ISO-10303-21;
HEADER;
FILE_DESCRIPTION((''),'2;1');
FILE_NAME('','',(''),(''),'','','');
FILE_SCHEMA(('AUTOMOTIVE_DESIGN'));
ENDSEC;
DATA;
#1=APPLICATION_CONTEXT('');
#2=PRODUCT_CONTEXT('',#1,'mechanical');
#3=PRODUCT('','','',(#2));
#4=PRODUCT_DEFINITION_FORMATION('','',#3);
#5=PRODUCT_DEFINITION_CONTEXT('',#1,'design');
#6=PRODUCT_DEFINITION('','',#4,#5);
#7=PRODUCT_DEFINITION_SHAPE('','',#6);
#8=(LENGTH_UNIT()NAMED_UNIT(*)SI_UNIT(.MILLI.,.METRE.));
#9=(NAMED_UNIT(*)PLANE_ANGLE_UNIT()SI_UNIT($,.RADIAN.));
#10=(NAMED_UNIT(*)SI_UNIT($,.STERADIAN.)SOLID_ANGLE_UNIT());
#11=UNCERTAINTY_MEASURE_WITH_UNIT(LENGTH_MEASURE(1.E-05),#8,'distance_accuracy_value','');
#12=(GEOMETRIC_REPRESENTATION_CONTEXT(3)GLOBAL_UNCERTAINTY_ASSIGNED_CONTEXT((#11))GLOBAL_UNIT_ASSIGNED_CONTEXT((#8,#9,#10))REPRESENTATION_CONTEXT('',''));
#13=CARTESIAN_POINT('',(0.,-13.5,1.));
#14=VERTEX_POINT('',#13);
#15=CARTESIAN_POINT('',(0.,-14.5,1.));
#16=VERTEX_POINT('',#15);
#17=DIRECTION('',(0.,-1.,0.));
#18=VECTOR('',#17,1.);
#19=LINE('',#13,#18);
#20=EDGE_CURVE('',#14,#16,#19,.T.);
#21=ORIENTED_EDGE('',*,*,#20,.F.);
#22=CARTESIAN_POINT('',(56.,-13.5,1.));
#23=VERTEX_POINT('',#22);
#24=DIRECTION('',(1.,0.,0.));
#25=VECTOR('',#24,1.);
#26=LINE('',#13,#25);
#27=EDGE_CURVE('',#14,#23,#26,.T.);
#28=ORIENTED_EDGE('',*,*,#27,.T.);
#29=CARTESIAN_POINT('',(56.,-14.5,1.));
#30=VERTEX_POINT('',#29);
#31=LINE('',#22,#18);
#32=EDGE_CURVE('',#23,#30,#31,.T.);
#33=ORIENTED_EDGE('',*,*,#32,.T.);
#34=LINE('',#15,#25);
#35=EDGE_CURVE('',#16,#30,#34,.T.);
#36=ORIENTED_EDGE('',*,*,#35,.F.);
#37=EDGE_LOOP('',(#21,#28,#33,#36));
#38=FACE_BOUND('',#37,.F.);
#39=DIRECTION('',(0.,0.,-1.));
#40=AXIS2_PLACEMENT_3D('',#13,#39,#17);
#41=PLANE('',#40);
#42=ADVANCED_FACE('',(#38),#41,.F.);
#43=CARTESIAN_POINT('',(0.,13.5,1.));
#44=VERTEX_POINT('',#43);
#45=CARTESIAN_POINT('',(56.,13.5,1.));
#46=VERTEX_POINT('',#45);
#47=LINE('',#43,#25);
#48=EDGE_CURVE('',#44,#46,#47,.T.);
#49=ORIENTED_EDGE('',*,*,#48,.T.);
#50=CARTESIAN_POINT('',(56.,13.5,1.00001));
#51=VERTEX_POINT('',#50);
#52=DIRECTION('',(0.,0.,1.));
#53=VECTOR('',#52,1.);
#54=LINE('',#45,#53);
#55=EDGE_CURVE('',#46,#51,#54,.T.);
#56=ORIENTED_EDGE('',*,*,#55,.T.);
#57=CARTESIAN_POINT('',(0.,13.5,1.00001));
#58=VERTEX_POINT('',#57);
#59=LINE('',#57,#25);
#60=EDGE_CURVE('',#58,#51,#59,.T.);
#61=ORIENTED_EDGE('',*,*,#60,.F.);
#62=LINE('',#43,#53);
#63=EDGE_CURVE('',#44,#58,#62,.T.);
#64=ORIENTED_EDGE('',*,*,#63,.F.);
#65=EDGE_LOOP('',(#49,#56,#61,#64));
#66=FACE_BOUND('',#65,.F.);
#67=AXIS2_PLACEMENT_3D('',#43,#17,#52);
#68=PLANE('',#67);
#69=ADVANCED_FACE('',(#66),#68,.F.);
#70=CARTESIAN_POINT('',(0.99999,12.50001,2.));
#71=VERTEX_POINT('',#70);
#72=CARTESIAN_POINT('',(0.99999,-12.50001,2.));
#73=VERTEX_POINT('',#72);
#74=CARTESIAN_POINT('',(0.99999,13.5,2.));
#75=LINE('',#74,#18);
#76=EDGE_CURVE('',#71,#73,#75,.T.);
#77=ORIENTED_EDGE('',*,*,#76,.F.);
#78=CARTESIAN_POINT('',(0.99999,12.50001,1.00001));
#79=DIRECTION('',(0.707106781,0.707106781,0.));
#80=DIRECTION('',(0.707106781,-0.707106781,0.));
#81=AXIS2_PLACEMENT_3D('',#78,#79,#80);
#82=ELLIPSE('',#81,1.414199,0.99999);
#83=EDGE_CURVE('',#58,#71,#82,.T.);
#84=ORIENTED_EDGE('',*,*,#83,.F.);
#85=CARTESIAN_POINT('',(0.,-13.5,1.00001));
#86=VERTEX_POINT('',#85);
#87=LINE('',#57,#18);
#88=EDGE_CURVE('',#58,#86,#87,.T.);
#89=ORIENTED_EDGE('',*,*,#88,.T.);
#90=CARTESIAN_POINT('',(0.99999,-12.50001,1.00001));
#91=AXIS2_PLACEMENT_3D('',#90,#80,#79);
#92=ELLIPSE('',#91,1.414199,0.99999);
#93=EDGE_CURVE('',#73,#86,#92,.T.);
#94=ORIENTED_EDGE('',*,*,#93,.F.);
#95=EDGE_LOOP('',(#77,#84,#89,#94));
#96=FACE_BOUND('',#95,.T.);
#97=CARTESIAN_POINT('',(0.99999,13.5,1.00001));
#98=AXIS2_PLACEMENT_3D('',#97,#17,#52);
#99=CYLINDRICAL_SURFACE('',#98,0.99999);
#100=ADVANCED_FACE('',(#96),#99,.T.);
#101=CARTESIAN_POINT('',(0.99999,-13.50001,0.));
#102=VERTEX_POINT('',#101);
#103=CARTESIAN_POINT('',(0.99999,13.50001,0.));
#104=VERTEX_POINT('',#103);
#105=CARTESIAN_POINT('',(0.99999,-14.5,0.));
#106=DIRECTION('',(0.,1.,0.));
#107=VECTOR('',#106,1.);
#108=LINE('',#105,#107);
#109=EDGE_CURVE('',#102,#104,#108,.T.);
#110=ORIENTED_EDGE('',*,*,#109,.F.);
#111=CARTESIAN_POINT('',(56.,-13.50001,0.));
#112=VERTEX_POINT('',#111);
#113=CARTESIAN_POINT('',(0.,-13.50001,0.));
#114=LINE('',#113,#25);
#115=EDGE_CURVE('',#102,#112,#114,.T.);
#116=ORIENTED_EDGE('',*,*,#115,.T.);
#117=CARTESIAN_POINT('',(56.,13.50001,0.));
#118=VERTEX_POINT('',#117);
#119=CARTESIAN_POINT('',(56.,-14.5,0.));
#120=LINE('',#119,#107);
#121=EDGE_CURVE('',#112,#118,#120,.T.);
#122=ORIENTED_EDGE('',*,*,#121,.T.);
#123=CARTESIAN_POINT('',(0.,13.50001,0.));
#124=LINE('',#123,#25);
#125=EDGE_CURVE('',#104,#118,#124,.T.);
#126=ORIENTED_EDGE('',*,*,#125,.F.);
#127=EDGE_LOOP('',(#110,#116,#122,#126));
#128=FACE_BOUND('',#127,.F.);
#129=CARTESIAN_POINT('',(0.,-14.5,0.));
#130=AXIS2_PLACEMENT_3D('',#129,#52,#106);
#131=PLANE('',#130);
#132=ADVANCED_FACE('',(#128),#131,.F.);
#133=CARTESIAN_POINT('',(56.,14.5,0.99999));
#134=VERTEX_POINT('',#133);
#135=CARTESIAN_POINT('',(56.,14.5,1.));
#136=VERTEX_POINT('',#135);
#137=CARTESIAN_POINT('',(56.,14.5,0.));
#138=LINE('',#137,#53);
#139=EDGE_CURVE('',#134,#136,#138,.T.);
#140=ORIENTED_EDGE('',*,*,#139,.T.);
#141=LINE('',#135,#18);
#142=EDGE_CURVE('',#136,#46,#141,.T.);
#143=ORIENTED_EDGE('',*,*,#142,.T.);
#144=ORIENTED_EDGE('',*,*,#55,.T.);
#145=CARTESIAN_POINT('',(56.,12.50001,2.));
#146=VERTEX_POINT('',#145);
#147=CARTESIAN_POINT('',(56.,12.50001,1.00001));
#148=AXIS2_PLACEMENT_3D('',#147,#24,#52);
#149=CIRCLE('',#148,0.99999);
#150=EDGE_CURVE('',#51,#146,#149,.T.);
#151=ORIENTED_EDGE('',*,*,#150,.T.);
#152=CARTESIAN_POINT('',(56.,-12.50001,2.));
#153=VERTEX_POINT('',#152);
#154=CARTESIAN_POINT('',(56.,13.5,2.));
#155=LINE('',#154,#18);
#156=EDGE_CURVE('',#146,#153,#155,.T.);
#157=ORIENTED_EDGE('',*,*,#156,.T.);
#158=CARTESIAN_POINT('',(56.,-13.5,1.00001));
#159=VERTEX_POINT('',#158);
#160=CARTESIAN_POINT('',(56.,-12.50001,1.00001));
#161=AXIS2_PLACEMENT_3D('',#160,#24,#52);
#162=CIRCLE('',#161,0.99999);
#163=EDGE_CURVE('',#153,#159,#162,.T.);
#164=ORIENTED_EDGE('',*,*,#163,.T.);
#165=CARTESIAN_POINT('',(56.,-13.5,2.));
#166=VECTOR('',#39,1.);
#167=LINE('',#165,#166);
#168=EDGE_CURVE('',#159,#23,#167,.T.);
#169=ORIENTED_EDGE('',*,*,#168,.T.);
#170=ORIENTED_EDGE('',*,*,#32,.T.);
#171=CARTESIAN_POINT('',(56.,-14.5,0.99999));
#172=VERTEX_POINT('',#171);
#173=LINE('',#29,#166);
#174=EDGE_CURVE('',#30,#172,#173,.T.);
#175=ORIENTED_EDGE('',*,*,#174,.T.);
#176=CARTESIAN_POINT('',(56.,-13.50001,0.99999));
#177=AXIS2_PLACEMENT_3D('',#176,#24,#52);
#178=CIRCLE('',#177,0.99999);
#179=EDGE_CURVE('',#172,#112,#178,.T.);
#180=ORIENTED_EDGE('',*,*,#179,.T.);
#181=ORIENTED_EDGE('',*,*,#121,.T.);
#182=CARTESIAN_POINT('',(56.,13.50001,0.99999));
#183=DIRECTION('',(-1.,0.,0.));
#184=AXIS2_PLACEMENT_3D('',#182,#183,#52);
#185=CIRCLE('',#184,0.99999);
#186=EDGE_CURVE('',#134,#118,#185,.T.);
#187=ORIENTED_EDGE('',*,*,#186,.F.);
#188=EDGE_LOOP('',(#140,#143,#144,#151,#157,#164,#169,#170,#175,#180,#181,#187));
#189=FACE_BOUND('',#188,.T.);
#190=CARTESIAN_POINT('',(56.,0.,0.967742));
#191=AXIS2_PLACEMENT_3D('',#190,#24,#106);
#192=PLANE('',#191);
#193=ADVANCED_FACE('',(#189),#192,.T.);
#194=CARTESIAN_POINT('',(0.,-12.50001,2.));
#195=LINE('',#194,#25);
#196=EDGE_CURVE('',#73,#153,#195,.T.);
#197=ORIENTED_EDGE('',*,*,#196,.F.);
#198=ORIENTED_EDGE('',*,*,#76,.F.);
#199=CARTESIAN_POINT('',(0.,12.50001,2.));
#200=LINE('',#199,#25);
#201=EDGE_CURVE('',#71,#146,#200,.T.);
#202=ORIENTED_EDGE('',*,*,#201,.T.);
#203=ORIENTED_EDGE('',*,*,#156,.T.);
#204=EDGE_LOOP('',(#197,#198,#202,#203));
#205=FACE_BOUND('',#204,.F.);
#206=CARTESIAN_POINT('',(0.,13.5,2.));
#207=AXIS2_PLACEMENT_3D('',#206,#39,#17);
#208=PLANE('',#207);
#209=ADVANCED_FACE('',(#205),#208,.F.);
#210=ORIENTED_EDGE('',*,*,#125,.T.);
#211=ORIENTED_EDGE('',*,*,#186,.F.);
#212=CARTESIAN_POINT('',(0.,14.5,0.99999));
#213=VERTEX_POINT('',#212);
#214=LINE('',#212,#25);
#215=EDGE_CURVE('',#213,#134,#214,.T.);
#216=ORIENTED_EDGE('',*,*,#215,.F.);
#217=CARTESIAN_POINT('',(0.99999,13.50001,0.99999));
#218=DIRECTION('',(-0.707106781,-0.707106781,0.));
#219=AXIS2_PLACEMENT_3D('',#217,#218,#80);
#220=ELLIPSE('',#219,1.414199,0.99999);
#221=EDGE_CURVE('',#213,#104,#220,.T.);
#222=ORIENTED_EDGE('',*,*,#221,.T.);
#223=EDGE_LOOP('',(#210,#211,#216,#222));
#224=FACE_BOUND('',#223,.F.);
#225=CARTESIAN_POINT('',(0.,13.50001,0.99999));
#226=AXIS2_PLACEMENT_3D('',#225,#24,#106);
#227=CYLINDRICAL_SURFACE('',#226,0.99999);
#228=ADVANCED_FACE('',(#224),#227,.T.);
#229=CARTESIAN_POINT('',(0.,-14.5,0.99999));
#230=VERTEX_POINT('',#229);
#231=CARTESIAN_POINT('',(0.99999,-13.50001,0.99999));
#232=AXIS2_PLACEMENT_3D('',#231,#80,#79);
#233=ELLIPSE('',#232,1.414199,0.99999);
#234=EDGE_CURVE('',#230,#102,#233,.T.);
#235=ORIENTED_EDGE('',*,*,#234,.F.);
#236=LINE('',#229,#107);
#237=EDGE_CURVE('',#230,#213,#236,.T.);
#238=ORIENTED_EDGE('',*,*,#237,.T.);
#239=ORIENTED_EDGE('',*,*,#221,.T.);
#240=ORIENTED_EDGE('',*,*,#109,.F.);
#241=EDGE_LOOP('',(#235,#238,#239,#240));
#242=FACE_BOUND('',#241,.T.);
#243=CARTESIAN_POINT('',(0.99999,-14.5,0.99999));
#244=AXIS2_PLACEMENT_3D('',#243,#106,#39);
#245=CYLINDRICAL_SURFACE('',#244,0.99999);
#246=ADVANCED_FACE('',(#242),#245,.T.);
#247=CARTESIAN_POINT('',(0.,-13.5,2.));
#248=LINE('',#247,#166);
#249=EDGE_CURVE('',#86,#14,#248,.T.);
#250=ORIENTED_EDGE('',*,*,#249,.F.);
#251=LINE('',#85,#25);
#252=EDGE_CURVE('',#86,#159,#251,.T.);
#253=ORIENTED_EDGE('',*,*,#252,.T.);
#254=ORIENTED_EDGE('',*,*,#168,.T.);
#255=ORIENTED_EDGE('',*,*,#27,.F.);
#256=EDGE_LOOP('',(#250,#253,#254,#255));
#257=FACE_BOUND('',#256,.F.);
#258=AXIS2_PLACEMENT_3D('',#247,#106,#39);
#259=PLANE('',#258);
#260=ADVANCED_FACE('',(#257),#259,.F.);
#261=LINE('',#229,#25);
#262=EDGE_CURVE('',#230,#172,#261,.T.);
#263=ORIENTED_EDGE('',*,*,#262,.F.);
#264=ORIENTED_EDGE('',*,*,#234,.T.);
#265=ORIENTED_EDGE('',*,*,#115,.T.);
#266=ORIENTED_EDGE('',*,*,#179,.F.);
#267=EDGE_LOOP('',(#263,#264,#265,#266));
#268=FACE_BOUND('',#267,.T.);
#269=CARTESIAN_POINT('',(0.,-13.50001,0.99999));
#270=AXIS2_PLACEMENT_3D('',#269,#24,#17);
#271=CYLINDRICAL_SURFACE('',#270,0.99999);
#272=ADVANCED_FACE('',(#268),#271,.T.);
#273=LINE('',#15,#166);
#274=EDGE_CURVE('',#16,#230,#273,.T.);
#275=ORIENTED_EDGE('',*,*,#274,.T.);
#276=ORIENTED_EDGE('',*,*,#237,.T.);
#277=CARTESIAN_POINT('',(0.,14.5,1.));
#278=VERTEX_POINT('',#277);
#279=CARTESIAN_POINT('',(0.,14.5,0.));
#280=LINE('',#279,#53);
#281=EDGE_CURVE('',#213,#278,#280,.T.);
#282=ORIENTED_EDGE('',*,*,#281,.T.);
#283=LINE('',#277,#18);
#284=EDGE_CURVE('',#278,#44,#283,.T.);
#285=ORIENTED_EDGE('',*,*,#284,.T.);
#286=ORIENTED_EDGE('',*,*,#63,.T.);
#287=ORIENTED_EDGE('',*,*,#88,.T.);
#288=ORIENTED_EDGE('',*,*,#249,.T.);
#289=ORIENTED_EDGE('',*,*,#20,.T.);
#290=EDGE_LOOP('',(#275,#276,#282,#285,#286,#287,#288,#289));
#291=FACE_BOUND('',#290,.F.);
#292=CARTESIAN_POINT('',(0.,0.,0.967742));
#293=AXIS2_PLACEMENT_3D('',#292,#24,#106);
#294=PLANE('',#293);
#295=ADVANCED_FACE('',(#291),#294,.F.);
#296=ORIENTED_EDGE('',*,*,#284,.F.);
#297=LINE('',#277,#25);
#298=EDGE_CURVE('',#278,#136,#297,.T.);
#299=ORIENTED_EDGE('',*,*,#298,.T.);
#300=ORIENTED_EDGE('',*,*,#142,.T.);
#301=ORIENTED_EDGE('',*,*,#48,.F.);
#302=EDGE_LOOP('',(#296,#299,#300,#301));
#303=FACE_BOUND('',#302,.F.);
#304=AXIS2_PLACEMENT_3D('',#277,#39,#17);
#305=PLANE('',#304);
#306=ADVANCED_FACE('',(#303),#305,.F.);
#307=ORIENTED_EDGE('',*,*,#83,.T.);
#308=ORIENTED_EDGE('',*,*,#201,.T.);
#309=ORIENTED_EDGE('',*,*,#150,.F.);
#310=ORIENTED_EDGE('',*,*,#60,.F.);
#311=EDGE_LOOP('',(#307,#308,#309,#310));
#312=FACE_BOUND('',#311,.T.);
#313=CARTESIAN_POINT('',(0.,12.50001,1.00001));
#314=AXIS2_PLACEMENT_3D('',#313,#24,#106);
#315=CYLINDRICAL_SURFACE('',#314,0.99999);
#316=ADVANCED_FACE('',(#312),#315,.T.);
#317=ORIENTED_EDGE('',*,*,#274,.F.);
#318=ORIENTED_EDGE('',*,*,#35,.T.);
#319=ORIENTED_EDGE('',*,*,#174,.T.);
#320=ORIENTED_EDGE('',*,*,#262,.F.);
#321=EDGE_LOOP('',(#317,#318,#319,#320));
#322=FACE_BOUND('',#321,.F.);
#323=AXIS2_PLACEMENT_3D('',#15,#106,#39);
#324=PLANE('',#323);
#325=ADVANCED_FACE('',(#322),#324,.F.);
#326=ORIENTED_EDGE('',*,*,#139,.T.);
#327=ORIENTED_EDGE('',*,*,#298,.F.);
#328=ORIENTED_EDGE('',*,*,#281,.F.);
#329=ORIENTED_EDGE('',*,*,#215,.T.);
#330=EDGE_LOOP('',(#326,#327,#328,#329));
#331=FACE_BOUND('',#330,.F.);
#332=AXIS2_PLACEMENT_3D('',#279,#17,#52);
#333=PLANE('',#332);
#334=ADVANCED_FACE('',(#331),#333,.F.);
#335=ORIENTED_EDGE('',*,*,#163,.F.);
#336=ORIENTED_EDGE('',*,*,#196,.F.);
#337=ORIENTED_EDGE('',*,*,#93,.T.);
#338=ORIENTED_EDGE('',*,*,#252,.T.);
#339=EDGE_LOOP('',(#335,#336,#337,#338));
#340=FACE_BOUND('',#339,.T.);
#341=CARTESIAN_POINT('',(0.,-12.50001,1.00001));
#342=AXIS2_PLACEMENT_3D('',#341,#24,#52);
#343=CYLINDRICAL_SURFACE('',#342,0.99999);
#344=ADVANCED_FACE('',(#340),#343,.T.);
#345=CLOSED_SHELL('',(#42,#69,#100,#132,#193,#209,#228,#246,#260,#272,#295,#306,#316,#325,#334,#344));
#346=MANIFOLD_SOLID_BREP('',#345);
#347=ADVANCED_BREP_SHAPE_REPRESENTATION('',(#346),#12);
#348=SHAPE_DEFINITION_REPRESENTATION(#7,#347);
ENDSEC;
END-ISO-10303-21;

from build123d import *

# Parameters (mm, degrees)
F1_DEPTH = 56
F2_R     = 0.99999


# Not quite as in the source:
# - a fillet or chamfer is up to 0.001 mm smaller than in the source, because OpenCascade refuses the exact size


with BuildPart() as f1:
    # F0 (on Right) → F1 (new body)
    with BuildSketch(Plane.YZ):
        Polygon((0, 0), (14.5, 0), (14.5, 1), (13.5, 1), (13.5, 2), (0, 2), (-6.25, 2), (-13.5, 2), (-13.5, 1), (-14.5, 1), (-14.5, 0), (-7.25, 0), align=None)
    extrude(amount=F1_DEPTH)

    # F2 (radius 1 in the source; OpenCascade refuses exactly that, so slightly less here)
    f2_edges = [f1.edges().sort_by_distance(p)[0] for p in [
        (28, 13.5, 2),
        (28, -13.5, 2),
        (28, 14.5, 0),
        (28, -14.5, 0),
        (0, 0, 2),
        (0, 0, 0),
    ]]
    fillet(f2_edges, radius=F2_R)


solid = f1.part
